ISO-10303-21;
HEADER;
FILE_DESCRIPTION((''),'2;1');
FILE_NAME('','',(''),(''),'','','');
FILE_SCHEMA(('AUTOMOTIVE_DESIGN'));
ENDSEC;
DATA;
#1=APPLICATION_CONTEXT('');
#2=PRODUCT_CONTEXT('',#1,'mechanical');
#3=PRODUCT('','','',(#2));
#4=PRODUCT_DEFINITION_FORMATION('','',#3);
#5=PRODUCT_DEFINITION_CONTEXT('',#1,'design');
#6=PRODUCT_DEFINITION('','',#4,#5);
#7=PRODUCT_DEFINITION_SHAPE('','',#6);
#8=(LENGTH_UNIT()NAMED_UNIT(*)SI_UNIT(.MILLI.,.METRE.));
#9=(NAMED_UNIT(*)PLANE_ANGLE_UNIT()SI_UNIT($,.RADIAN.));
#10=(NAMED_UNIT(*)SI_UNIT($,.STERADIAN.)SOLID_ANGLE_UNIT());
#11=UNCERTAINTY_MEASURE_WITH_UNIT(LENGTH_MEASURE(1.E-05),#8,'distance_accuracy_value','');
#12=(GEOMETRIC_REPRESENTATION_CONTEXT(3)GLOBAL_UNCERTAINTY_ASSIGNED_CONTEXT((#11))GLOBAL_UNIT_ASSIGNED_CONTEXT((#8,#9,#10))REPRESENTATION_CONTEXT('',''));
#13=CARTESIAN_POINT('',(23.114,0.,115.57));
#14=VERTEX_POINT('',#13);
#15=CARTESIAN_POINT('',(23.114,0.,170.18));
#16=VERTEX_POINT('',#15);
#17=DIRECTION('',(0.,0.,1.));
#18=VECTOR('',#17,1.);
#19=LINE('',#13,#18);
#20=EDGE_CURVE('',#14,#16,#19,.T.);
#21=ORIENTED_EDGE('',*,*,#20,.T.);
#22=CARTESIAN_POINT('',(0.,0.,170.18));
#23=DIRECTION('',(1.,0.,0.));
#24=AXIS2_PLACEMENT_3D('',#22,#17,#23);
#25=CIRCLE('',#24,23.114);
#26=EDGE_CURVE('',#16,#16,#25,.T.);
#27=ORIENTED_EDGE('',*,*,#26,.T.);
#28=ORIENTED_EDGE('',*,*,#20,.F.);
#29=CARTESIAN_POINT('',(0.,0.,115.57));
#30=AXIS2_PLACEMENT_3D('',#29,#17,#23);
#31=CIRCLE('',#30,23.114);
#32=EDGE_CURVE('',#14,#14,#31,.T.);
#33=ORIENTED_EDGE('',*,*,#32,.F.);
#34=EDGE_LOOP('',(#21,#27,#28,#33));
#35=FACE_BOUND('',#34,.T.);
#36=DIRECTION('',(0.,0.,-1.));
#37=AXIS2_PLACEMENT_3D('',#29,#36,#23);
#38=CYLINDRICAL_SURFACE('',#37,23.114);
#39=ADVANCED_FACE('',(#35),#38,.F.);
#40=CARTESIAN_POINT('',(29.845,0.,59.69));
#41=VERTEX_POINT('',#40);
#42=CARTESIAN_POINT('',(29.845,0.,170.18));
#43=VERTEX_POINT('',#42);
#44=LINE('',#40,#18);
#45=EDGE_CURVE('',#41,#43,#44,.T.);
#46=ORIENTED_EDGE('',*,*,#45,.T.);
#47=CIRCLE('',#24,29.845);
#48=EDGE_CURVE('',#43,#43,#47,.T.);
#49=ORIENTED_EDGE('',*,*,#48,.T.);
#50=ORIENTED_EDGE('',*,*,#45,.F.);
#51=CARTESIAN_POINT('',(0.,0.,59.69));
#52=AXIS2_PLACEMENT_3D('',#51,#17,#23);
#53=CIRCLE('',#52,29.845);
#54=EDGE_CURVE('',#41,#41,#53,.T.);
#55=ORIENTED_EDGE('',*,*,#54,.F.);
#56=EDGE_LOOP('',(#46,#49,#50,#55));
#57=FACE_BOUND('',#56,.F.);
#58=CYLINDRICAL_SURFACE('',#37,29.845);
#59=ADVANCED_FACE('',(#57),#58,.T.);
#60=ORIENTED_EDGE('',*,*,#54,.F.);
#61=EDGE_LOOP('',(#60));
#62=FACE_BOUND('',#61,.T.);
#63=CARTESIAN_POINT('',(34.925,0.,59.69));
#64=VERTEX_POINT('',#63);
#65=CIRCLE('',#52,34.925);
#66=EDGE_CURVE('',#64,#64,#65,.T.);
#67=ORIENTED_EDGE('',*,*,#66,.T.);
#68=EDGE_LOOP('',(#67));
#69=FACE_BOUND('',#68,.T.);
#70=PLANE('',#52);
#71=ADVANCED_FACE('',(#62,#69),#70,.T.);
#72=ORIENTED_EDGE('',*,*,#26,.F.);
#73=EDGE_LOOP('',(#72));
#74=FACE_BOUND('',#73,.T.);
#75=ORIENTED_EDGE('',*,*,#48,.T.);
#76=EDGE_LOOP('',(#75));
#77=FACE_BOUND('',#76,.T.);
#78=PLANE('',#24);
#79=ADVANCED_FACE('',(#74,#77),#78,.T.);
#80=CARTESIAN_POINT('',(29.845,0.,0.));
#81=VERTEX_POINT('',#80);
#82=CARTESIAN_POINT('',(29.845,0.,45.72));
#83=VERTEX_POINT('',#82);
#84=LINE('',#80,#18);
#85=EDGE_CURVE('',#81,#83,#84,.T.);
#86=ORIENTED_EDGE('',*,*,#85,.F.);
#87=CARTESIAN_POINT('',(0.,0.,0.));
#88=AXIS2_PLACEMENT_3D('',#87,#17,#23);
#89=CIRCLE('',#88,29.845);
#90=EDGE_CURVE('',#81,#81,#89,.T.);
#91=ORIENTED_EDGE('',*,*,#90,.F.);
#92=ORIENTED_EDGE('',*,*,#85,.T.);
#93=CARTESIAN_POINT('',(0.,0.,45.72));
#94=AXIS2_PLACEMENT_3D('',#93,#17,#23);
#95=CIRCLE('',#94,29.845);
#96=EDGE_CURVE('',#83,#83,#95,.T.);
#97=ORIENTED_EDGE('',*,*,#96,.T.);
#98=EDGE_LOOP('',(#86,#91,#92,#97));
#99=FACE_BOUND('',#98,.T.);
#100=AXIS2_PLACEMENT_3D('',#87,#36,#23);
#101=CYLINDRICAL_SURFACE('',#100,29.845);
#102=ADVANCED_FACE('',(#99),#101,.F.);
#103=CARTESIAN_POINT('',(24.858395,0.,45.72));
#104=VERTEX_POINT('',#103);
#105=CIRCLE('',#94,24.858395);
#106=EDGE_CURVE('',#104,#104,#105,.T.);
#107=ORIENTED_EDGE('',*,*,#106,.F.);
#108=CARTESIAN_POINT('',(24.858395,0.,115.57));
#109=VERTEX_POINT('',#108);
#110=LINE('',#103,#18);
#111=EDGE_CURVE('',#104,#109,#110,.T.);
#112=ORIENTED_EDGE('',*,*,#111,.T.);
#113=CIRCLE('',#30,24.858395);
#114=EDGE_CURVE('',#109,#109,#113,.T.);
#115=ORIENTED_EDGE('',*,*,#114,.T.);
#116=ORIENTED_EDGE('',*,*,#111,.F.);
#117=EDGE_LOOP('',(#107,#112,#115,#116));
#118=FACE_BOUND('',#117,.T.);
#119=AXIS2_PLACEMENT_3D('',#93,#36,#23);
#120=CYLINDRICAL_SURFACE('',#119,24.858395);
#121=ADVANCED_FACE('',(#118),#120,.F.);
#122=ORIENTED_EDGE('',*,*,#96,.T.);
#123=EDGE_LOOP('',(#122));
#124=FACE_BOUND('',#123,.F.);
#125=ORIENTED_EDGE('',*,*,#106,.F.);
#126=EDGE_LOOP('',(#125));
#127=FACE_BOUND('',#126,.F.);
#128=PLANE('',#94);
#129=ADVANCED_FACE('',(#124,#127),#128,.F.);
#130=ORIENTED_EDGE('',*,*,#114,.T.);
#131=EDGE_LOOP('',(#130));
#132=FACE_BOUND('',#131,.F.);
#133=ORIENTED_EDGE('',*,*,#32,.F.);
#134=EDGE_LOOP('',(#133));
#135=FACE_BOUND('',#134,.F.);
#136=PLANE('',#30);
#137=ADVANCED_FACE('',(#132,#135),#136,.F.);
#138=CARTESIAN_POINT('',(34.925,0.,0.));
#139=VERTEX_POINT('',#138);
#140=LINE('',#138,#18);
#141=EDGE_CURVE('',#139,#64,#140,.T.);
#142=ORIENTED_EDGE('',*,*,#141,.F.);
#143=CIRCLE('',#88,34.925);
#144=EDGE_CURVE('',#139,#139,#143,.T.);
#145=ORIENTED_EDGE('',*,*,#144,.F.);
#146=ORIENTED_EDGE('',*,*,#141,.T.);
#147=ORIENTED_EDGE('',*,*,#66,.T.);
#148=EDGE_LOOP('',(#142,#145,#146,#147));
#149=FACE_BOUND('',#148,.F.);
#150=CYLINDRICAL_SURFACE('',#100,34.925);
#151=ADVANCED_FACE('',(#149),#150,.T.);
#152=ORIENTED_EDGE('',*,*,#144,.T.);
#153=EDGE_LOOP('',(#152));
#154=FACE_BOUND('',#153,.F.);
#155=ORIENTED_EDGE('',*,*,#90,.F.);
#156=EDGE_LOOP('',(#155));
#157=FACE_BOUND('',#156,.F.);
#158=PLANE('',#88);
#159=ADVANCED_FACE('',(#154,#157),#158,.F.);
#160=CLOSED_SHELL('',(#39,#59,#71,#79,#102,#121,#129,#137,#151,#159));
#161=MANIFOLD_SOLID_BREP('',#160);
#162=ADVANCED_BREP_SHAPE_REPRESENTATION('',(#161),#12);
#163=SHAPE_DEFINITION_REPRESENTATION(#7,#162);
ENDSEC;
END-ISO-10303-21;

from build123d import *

# Parameters (mm, degrees)
F0_R      = 34.925
F0_R_2    = 29.845
F1_DEPTH  = 59.69
F7_R      = 29.845
F7_R_2    = 24.8583947088
F8_DEPTH  = 69.85
F15_R     = 29.845
F15_R_2   = 23.114
F16_DEPTH = 54.61


# Not quite as in the source:
# - the program builds the solid bodies; features that only make, move or delete a surface that nothing else refers to are left out


with BuildPart() as f1:
    # F0 (on Top) → F1 (new body)
    with BuildSketch(Plane.XY):
        Circle(F0_R)
        Circle(F0_R_2, mode=Mode.SUBTRACT)
    extrude(amount=F1_DEPTH)

    # F7 (on offset) → F8 (join)
    with BuildSketch(Plane.XY.offset(45.72)):
        Circle(F7_R)
        Circle(F7_R_2, mode=Mode.SUBTRACT)
    extrude(amount=F8_DEPTH)

    # F15 (on offset) → F16 (join)
    with BuildSketch(Plane.XY.offset(115.57)):
        Circle(F15_R)
        Circle(F15_R_2, mode=Mode.SUBTRACT)
    extrude(amount=F16_DEPTH)


solid = f1.part
